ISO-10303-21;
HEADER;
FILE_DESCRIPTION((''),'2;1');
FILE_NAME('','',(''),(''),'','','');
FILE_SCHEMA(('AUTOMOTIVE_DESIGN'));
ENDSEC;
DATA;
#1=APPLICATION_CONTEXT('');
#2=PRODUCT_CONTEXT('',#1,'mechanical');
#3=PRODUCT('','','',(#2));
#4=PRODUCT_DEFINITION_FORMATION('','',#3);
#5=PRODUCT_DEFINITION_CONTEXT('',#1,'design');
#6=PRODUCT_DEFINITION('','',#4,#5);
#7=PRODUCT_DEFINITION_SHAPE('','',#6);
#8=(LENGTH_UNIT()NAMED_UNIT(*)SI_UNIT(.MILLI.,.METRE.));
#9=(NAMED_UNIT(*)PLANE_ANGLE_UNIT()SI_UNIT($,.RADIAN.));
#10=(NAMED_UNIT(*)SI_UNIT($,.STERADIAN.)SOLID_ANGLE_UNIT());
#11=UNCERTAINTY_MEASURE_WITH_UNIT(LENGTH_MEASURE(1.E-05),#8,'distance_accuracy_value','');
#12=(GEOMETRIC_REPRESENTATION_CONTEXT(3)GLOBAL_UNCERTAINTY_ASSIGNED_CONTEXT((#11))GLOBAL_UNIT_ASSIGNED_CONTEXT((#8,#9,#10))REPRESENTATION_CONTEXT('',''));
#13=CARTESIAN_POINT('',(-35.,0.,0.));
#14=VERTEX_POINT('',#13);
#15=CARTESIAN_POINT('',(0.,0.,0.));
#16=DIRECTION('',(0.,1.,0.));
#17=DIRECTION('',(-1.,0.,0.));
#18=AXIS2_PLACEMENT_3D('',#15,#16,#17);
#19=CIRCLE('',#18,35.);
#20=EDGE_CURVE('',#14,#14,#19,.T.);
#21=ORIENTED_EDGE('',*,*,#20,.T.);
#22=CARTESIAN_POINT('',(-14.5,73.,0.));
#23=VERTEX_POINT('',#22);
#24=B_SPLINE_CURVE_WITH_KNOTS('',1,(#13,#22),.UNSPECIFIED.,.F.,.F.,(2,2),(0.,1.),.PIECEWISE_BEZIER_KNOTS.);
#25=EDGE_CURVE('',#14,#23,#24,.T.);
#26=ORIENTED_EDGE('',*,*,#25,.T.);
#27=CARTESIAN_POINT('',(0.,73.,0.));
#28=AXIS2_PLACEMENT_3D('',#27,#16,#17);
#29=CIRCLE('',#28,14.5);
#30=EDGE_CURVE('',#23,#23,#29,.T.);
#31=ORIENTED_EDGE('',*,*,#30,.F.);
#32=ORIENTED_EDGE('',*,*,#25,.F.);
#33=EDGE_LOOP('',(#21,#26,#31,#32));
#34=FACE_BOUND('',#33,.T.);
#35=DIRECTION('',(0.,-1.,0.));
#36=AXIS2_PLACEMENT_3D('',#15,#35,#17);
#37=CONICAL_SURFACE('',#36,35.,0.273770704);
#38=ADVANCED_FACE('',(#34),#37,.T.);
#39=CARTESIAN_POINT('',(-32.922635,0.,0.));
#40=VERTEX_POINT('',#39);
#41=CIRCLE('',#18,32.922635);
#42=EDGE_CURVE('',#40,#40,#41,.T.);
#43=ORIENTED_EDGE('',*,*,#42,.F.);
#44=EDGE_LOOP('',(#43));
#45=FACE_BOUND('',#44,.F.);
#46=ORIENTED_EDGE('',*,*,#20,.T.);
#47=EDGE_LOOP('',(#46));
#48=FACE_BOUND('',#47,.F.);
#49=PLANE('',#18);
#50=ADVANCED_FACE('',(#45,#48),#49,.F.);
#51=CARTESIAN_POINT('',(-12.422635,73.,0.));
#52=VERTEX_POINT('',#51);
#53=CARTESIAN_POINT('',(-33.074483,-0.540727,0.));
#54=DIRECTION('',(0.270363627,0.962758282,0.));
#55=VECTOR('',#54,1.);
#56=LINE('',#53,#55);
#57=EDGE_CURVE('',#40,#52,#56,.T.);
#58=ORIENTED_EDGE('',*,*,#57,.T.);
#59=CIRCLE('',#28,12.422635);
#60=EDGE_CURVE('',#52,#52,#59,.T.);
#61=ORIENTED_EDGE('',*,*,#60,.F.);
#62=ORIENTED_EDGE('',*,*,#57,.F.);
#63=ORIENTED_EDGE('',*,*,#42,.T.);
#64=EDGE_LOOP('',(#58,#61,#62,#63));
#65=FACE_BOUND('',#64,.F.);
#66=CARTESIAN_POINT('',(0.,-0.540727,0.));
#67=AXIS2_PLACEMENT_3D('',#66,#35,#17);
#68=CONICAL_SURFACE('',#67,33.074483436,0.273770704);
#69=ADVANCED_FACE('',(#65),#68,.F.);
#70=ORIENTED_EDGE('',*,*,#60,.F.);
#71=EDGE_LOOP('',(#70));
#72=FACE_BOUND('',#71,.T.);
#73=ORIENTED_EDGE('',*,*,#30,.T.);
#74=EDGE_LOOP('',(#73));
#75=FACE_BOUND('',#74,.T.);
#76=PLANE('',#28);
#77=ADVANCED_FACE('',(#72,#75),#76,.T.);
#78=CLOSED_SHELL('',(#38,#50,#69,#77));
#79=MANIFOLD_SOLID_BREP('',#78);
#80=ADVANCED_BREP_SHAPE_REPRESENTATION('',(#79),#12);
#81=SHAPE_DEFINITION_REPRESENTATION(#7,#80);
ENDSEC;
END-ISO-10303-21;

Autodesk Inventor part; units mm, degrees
ref_plane "YZ Plane" through (0, 0, 0) normal (1, 0, 0) x (0, 1, 0)
ref_plane "XY Plane" through (0, 0, 0) normal (0, 0, 1) x (1, 0, 0)
sketch "Szkic6" plane through (0, 0, 0) normal (0, 1, 0) x (-1, 0, 0)
  circle A0 centre (0, 0) radius 35
  dimension "d33" = 70
ref_plane "Płaszczyzna konstrukcyjna1" through (0, 73, 0) normal (0, 1, 0) x (-1, 0, 0)
sketch "Szkic7" plane through (0, 73, 0) normal (0, 1, 0) x (-1, 0, 0)
  circle A0 centre (0, 0) radius 14.5
  dimension "d35" = 29
loft "Wyciągnięcie złożone1" add profiles "Szkic6", "Szkic7"
shell "Skorupa1" thickness 2 removed faces 2 at (1.052, 73, -3.5603) at (1.9985, 0, 11.019)
equation "\"d33\" = OD1"
equation "\"d35\" = OD2"
equation "\"d52\" = THK"
equation "\"SzerokośćGięciaPodcięcia\" = Grubość"
equation "\"RozmiarPodcięciaNarożnika\" = 4 * Grubość"
equation "\"PromieńPrzejścia\" = PromieńGięcia"
equation "\"Rozmiar_promienia_Jacobiego\" = PromieńGięcia"
equation "\"Wielk_odstępu\" = Grubość"
equation "\"d2\" = PromieńGięcia"
equation "\"d23\" = PromieńGięcia"
equation "\"OD1\" = 70"
equation "\"OD2\" = 29"
equation "\"L\" = 73"
equation "\"THK\" = 2"
equation "\"d34\" = L"
equation "\"Grubość\" = 1.5"
equation "\"PromieńGięcia\" = 3"
properties part number "Redukcja symetryczna Ø70x29x2 L=73" material "304"
